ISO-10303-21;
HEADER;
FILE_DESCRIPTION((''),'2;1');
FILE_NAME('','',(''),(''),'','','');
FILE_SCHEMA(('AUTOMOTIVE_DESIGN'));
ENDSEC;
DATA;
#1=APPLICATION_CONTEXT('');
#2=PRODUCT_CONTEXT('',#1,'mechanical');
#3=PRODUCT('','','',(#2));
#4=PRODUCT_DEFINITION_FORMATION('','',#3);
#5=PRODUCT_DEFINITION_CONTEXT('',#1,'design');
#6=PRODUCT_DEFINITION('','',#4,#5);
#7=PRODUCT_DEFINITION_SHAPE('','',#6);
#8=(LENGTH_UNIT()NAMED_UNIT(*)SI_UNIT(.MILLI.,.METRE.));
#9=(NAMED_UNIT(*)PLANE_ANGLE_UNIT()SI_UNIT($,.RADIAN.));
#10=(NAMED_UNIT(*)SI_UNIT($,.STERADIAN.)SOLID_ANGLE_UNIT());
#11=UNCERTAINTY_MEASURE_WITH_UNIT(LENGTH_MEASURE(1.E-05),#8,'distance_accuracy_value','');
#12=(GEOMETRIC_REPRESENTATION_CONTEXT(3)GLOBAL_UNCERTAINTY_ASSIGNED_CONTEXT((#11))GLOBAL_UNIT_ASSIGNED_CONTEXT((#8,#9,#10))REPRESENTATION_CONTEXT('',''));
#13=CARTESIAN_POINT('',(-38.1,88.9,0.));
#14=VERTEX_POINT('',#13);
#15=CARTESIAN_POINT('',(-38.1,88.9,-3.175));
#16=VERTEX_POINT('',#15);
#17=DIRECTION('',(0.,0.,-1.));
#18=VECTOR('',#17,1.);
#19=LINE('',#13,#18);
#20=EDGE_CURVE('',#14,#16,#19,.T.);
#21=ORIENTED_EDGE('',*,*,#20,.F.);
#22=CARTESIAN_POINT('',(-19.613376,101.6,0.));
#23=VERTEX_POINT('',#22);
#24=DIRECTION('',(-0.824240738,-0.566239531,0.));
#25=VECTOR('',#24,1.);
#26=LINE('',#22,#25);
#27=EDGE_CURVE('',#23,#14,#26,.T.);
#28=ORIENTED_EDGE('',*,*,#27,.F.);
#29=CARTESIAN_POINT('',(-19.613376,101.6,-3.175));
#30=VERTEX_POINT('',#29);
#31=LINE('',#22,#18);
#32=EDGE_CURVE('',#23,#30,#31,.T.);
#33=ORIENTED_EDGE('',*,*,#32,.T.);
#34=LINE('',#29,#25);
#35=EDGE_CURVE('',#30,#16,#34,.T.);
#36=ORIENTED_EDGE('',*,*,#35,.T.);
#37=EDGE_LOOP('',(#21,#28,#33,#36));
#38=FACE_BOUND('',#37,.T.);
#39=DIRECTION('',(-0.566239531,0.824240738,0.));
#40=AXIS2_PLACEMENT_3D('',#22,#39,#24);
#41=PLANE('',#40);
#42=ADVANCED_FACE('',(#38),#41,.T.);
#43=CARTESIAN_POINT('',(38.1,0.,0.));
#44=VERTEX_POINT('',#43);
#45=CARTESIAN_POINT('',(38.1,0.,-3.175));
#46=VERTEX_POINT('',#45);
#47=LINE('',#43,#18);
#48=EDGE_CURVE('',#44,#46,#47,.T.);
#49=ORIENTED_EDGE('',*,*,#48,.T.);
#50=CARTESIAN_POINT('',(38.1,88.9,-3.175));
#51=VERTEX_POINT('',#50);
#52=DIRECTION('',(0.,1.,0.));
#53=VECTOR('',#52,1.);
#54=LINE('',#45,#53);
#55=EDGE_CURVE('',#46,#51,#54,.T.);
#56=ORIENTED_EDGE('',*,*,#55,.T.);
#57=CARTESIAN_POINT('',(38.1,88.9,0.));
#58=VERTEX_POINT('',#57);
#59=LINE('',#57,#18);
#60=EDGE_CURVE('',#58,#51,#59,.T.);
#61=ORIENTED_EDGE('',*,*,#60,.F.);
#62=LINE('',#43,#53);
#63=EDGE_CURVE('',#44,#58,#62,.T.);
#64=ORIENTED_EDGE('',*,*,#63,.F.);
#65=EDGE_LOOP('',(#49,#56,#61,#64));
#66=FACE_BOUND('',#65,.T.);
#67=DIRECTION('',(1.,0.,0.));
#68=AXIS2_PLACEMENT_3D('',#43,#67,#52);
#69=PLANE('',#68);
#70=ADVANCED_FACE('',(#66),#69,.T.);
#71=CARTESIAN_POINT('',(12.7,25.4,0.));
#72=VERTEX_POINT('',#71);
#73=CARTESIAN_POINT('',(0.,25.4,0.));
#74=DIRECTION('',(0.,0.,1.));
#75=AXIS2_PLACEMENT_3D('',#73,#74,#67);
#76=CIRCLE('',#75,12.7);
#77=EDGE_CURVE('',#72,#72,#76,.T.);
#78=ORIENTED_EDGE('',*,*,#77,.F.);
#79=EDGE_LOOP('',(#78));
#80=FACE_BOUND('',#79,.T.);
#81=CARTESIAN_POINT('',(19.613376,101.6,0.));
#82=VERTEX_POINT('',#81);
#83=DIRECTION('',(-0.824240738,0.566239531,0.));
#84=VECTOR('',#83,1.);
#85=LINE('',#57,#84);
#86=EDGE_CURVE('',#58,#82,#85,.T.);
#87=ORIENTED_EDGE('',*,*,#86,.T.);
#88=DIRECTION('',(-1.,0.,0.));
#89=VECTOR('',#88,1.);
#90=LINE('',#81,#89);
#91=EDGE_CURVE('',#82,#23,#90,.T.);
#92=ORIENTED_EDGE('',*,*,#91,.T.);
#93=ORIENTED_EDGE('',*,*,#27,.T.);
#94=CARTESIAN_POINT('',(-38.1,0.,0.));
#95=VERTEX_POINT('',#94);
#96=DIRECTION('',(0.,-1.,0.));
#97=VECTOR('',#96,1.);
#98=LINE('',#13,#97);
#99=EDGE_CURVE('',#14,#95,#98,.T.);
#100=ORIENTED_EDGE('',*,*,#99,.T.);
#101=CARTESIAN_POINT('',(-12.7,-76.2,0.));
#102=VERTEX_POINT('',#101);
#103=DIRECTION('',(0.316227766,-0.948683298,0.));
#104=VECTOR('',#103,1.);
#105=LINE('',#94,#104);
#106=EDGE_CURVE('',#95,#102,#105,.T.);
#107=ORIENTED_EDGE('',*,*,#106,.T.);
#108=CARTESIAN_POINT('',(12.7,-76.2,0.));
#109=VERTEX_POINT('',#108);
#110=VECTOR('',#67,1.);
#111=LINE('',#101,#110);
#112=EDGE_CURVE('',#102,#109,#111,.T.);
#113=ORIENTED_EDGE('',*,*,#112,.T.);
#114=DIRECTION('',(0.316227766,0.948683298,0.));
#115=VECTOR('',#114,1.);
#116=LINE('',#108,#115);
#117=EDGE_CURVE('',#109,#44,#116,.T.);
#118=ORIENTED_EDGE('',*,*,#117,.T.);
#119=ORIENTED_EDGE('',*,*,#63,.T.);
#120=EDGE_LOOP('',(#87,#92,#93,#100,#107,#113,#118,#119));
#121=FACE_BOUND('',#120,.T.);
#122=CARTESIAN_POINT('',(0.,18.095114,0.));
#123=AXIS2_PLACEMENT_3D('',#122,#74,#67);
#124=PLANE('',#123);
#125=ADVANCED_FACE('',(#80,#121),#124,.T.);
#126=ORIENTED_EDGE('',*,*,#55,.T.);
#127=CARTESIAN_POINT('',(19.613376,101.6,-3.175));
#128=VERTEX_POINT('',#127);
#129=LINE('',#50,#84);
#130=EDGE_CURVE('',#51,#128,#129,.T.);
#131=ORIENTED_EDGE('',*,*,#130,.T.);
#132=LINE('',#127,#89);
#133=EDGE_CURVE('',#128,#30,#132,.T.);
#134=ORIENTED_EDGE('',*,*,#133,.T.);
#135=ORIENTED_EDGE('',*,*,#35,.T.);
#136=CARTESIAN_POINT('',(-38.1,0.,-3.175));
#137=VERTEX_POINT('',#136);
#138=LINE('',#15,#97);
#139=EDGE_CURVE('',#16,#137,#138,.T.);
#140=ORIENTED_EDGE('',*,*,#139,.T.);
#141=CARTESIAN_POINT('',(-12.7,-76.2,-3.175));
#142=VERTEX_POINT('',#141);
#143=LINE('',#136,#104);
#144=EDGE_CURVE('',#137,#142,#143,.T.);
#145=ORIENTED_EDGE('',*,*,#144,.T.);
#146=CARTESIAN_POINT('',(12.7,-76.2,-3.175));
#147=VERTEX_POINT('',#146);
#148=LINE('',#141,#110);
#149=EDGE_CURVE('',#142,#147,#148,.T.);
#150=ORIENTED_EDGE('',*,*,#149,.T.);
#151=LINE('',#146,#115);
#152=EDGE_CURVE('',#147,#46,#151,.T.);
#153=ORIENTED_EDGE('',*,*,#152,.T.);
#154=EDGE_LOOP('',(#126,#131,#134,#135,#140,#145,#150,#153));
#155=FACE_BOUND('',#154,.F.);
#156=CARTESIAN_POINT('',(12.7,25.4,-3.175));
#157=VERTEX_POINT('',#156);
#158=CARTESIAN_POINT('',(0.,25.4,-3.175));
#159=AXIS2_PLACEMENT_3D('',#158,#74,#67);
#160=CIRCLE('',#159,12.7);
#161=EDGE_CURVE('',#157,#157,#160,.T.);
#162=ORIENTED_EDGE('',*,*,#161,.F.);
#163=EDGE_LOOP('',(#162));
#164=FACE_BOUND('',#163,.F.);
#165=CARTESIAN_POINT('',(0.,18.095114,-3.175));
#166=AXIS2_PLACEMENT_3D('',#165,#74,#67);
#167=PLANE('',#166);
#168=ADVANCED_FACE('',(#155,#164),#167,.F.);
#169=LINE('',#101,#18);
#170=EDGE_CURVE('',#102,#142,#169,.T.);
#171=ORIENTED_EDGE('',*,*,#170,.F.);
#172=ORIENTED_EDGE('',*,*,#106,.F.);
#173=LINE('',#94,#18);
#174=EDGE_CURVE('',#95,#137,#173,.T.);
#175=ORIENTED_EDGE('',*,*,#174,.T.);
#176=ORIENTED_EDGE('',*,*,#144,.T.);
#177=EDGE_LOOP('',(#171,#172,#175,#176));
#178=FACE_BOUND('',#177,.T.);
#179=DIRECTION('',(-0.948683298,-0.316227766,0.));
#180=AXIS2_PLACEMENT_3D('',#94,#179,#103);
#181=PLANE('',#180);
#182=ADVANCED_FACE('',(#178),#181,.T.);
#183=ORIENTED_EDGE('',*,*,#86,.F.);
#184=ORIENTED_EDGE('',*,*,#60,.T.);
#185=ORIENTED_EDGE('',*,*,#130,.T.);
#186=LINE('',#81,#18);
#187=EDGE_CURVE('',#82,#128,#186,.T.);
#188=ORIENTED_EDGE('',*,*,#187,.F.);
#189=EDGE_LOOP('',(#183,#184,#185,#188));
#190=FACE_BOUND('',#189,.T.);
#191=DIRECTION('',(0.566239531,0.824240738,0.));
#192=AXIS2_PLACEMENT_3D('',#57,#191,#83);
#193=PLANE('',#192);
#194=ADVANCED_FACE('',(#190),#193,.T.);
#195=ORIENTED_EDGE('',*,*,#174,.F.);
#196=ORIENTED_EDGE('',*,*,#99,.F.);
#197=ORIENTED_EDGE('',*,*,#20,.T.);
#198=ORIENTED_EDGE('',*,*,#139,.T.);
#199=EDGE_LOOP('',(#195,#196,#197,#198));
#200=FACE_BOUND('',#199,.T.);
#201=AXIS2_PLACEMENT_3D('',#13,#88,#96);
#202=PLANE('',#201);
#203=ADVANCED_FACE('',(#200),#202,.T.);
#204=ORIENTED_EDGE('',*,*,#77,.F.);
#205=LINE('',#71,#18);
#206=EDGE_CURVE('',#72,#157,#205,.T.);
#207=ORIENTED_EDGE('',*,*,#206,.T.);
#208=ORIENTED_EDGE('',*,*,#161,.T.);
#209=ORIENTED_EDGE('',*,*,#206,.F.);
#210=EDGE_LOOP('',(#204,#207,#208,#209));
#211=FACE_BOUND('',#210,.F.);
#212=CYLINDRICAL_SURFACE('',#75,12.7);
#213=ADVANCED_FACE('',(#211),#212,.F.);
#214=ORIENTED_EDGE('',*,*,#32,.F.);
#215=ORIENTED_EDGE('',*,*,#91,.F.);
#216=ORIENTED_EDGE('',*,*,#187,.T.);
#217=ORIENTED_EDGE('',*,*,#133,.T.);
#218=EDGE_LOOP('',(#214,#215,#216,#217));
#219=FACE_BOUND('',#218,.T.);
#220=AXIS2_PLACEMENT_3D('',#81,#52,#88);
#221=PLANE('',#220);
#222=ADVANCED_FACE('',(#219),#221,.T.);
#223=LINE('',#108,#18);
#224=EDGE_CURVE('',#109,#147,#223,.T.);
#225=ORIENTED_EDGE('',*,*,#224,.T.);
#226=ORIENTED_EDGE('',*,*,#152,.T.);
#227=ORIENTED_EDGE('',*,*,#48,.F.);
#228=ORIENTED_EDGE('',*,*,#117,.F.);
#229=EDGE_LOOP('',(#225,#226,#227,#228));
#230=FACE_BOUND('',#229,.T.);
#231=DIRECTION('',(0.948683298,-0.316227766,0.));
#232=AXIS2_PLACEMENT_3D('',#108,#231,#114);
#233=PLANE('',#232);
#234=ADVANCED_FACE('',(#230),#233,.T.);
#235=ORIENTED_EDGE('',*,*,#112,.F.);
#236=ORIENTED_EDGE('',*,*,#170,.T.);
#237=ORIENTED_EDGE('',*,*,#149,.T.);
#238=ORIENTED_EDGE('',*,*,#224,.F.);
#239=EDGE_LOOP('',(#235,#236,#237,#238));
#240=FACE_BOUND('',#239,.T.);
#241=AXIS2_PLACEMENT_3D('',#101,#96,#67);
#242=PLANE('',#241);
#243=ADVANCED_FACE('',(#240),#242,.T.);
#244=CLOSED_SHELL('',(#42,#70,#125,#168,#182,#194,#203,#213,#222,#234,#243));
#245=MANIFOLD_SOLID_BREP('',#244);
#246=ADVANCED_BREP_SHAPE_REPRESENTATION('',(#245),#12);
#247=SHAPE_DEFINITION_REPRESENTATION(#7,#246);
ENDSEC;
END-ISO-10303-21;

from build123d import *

# Parameters (mm, degrees)
F0_R     = 12.7
F1_DEPTH = 3.175


# Not quite as in the source:
# - a length typed as a fraction of an inch, garbled in the dataset ("3 / 203.2 mm" for 3/8 in), is restored


with BuildPart() as f1:
    # F0 (on Top) → F1 (new body)
    with BuildSketch(Plane.XY):
        Polygon((-38.1, 0), (-12.7, -76.2), (12.7, -76.2), (38.1, 0), (38.1, 50.8), (38.1, 88.9), (19.6133758873, 101.6), (-19.6133758873, 101.6), (-38.1, 88.9), (-38.1, 50.8), align=None)
        with Locations((0, 25.4)):
            Circle(F0_R, mode=Mode.SUBTRACT)
    extrude(amount=-F1_DEPTH)


solid = f1.part
